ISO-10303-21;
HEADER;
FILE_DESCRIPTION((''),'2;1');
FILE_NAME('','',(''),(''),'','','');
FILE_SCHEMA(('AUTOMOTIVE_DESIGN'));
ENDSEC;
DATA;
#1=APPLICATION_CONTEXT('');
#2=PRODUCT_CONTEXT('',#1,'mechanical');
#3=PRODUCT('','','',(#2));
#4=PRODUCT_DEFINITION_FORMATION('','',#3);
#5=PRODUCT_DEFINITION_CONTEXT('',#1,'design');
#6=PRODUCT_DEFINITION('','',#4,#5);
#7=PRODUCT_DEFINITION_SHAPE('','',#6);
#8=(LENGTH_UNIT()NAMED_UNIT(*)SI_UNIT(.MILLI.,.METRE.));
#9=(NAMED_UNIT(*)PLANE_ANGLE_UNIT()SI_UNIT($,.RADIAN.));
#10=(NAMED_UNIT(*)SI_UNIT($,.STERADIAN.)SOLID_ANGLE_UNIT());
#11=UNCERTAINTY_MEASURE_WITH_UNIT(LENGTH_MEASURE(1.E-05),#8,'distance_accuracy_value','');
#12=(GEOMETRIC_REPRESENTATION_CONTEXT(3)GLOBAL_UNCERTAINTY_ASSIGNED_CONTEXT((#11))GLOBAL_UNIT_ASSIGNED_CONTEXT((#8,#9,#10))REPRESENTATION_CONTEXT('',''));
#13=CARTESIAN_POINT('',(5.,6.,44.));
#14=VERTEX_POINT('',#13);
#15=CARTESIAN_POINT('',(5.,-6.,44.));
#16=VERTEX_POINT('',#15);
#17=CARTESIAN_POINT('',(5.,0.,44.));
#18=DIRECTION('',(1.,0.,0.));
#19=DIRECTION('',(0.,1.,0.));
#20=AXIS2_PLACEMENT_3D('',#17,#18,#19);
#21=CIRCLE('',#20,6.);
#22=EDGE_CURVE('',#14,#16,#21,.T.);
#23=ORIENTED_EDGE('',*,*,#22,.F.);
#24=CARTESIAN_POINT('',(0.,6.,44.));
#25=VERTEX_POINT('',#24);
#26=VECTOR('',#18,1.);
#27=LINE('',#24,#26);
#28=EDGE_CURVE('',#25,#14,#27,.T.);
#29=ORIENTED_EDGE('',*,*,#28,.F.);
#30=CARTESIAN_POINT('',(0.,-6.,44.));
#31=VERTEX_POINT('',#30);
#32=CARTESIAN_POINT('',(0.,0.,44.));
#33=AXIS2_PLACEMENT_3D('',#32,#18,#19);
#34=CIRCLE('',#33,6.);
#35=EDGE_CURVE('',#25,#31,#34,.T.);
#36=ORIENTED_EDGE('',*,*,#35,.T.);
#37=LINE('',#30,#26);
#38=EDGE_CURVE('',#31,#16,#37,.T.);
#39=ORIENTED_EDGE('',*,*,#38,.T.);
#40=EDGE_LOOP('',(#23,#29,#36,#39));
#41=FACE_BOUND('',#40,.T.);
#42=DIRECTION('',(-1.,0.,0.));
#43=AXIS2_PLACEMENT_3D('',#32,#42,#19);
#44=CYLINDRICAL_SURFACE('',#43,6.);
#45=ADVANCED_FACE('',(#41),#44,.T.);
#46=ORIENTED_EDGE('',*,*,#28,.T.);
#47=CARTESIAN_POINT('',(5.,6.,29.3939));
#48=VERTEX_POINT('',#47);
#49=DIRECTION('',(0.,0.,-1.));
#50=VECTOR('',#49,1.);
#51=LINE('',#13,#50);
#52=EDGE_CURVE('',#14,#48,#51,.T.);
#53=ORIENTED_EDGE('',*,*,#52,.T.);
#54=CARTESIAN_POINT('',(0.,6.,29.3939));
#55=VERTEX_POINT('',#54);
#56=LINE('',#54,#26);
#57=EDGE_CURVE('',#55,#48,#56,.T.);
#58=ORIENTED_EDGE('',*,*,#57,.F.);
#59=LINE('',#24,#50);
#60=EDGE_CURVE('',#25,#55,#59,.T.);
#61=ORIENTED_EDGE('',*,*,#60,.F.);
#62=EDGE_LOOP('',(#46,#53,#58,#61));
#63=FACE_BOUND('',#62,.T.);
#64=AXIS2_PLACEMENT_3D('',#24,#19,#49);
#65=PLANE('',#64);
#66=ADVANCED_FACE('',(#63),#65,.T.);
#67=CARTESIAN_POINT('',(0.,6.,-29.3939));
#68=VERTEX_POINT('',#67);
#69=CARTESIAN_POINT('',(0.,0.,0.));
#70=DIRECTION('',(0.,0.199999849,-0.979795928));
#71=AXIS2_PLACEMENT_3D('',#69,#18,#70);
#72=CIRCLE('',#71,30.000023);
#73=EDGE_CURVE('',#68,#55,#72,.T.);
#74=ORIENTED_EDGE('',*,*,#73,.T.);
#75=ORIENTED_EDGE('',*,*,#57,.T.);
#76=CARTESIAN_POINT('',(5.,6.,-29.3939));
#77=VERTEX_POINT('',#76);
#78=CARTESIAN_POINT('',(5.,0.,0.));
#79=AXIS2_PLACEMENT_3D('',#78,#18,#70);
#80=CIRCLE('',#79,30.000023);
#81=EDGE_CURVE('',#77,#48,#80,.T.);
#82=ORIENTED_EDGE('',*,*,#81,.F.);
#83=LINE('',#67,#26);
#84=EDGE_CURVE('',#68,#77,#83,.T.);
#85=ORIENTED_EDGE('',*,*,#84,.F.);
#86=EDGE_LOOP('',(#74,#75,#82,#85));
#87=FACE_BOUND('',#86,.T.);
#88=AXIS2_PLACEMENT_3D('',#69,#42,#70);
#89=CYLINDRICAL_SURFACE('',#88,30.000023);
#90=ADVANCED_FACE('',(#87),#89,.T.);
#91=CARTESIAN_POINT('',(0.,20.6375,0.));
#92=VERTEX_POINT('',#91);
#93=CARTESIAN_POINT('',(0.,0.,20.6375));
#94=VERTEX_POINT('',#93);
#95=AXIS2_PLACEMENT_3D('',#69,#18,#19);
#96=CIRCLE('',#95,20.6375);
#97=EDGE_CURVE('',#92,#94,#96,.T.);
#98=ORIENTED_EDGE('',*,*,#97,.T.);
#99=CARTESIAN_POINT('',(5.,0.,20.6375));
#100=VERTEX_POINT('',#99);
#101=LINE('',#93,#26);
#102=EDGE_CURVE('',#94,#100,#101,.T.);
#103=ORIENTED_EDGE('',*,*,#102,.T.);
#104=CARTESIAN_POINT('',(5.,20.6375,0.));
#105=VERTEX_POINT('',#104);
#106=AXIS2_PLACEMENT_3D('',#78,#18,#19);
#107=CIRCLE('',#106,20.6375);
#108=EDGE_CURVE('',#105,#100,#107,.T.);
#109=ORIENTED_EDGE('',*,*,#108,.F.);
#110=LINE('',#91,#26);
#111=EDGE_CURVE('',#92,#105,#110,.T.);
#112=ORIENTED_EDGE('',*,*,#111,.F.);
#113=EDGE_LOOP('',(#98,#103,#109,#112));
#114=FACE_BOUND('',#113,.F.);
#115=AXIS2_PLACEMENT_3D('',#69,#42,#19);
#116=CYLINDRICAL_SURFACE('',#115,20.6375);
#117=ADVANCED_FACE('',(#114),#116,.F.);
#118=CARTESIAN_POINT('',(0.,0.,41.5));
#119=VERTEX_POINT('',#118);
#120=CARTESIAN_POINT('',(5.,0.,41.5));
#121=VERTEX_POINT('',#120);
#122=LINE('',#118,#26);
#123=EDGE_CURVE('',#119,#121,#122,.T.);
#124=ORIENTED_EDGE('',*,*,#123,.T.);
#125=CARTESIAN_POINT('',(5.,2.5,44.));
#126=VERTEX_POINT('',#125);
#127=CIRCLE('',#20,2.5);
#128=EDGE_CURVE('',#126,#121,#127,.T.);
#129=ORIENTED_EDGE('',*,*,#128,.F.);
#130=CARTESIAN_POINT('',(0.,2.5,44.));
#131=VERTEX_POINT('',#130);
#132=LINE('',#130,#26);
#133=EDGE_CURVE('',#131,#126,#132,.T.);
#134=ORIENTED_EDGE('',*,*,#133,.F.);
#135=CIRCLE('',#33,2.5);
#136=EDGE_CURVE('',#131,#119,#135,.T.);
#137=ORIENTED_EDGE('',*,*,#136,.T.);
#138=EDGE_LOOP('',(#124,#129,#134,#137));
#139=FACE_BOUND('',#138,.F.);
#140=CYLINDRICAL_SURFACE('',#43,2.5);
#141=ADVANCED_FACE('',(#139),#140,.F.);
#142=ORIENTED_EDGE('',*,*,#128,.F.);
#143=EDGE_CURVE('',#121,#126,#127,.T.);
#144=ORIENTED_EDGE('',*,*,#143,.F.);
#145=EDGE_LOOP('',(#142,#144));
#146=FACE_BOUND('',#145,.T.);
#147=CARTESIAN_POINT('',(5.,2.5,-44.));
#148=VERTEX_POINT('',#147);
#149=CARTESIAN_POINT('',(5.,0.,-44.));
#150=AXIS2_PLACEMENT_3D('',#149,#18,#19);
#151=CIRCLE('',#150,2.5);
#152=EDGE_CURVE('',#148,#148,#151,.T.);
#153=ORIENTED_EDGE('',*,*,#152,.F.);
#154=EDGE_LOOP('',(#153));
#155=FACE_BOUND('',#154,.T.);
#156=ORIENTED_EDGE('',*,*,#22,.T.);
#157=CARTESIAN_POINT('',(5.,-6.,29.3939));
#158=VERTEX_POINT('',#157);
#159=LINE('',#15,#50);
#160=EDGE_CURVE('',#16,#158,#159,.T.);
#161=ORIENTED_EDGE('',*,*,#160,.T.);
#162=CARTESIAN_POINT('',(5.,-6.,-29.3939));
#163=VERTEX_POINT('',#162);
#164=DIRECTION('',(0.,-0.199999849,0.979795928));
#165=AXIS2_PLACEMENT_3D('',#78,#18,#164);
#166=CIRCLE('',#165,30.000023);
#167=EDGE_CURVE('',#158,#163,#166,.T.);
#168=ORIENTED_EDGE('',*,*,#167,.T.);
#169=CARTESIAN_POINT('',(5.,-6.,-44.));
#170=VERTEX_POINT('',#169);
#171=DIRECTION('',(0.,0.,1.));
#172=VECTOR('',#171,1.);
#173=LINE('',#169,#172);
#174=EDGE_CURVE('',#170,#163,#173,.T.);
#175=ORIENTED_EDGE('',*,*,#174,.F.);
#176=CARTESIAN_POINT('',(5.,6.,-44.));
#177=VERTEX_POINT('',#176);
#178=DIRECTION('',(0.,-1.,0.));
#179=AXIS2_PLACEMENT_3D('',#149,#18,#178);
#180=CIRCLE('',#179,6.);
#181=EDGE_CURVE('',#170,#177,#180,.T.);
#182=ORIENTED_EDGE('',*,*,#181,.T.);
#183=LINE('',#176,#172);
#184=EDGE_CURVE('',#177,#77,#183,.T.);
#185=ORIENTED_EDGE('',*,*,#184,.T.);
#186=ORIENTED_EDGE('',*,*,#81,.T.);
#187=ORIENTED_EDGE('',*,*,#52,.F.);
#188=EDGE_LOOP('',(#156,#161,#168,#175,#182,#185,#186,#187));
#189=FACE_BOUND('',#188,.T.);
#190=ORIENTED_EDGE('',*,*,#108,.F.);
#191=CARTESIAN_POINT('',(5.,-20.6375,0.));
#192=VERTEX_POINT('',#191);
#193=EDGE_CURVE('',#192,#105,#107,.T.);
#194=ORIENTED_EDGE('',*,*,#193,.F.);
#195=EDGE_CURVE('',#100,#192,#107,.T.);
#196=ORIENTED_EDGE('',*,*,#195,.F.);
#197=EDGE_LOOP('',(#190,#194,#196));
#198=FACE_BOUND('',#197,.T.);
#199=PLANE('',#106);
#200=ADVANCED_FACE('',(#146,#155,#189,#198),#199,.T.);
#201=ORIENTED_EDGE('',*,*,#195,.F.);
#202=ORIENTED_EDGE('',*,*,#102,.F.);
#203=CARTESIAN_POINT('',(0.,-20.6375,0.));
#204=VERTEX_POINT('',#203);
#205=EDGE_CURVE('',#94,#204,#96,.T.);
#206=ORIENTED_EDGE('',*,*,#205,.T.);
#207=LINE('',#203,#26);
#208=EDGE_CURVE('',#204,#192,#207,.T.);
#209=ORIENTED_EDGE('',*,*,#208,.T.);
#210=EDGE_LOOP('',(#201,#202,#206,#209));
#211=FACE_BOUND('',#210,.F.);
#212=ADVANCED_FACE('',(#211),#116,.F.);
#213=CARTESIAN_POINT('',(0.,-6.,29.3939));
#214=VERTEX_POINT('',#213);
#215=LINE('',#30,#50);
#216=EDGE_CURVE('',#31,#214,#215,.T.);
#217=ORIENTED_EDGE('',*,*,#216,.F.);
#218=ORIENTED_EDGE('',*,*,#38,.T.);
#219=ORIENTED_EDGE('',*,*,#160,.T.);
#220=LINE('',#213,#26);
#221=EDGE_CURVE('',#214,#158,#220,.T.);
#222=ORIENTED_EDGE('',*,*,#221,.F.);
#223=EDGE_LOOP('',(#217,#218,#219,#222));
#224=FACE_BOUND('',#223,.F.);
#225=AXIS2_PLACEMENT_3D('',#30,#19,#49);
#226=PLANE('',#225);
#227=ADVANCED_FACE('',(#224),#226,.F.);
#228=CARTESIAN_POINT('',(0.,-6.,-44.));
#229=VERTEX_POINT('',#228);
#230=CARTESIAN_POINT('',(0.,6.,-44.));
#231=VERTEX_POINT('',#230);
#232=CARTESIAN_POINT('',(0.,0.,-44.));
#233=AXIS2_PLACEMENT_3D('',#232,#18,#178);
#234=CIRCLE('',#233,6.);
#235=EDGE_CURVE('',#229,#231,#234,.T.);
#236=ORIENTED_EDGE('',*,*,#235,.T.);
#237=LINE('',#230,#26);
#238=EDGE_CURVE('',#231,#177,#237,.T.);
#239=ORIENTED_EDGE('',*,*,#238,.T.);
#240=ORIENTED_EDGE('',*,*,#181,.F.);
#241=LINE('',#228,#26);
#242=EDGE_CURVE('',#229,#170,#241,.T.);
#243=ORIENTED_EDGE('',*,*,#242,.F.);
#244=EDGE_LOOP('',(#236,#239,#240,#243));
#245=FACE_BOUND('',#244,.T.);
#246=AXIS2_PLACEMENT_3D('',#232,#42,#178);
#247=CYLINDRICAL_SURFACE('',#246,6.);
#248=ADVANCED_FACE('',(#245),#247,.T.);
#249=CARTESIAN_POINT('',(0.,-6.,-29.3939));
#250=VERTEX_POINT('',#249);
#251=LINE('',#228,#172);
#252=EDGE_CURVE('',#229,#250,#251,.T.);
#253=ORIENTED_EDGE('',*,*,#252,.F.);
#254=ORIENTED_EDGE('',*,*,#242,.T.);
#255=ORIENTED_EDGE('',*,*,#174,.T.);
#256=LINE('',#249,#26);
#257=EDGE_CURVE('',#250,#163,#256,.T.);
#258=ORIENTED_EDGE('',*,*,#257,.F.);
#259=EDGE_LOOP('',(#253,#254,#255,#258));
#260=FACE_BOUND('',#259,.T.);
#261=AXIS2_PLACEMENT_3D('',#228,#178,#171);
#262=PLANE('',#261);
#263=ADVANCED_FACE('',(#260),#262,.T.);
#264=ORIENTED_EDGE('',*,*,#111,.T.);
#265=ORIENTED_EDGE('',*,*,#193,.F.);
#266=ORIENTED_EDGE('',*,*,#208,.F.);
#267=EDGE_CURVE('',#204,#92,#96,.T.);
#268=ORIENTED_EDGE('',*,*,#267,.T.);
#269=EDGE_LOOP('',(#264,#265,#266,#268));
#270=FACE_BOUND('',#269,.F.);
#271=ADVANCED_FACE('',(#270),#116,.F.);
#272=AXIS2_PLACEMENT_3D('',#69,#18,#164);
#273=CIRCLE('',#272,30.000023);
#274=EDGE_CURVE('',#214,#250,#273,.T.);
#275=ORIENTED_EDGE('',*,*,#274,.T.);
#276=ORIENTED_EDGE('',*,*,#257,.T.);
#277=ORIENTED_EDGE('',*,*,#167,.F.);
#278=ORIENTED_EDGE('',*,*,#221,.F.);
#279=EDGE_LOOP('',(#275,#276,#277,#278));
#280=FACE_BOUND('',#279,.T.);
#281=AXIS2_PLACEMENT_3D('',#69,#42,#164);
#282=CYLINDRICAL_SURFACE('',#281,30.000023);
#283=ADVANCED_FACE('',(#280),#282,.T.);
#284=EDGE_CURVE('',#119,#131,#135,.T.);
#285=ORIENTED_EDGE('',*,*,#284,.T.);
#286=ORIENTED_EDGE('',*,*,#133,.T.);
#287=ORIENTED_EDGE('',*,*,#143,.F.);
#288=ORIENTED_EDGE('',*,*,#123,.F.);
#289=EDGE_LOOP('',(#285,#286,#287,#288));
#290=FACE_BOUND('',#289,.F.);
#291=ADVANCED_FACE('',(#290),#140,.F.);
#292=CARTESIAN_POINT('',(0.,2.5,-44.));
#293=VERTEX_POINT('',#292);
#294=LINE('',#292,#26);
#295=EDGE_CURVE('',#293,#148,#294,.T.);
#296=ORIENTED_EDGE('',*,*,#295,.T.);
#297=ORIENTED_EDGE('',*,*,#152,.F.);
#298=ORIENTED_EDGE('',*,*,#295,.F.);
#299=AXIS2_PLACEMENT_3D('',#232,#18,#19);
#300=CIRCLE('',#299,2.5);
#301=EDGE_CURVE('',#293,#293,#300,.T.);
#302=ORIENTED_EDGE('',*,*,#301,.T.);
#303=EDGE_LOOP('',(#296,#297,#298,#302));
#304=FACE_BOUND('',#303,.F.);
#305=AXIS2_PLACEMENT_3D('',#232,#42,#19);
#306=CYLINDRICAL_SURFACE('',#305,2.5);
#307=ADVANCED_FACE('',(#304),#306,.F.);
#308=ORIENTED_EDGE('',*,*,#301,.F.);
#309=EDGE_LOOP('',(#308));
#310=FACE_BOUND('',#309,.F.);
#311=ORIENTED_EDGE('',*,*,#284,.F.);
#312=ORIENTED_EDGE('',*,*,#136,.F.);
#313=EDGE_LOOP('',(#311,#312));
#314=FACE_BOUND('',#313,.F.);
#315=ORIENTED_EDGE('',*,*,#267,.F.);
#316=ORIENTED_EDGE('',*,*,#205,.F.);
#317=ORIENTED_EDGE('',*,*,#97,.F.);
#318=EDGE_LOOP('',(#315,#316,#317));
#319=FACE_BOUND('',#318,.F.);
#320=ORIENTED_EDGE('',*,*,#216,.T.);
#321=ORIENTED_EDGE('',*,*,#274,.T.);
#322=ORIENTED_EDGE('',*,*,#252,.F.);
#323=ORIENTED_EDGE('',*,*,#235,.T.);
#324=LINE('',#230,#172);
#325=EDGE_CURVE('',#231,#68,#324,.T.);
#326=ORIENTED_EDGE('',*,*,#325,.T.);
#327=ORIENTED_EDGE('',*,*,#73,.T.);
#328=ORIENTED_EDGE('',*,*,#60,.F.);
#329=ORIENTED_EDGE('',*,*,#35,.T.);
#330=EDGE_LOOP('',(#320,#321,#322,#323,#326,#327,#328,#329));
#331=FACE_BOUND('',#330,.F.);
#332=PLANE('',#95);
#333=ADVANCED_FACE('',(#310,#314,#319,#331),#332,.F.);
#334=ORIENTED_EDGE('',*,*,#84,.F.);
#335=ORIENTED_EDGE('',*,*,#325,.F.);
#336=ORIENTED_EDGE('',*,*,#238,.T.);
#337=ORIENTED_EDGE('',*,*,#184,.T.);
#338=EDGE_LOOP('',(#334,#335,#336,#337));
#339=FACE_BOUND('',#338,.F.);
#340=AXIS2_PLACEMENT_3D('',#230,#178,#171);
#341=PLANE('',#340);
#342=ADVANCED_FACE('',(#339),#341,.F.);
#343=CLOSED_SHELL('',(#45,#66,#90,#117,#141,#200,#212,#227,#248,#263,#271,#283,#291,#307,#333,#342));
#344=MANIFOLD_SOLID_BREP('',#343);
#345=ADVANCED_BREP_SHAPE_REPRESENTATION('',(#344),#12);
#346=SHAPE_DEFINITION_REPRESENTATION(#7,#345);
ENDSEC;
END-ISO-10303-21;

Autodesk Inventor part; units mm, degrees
ref_plane "YZ Plane" through (0, 0, 0) normal (1, 0, 0) x (0, 1, 0)
ref_plane "XZ Plane" through (0, 0, 0) normal (0, 1, 0) x (-1, 0, 0)
ref_plane "XY Plane" through (0, 0, 0) normal (0, 0, 1) x (1, 0, 0)
sketch "Sketch1" plane through (0, 0, 0) normal (1, 0, 0) x (0, 1, 0)
  circle A0 centre (0, 0) radius 10
  circle A1 centre (0, 0) radius 20.6375
  line L0 (0, 0) -> (0, 44)
  circle A2 centre (0, 44) radius 2.5
  line L1 (20.6375, 0) -> (-20.6375, 0)
  arc A3 (6, 44) -> (-6, 44) centre (0, 44) ccw
  line L2 (6, 44) -> (6, 29.3939)
  line L3 (-6, 44) -> (-6, 29.3939)
  circle A4 centre (0, -44) radius 2.5
  arc A5 (-6, -44) -> (6, -44) centre (0, -44) ccw
  line L4 (6, -44) -> (6, -29.3939)
  line L5 (-6, -44) -> (-6, -29.3939)
  arc A6 (-6, 29.3939) -> (-6, -29.3939) centre (0, 0) ccw
  arc A7 (6, -29.3939) -> (6, 29.3939) centre (0, 0) ccw
  dimension "d0" = 20
  dimension "d1" = 41.275
  dimension "d5" = 44
  dimension "d6" = 5
  dimension "d7" = 12
extrude "Extrusion1" add sketch "Sketch1" along normal blind 5
properties part number "Sujetador_Rodamiento"
